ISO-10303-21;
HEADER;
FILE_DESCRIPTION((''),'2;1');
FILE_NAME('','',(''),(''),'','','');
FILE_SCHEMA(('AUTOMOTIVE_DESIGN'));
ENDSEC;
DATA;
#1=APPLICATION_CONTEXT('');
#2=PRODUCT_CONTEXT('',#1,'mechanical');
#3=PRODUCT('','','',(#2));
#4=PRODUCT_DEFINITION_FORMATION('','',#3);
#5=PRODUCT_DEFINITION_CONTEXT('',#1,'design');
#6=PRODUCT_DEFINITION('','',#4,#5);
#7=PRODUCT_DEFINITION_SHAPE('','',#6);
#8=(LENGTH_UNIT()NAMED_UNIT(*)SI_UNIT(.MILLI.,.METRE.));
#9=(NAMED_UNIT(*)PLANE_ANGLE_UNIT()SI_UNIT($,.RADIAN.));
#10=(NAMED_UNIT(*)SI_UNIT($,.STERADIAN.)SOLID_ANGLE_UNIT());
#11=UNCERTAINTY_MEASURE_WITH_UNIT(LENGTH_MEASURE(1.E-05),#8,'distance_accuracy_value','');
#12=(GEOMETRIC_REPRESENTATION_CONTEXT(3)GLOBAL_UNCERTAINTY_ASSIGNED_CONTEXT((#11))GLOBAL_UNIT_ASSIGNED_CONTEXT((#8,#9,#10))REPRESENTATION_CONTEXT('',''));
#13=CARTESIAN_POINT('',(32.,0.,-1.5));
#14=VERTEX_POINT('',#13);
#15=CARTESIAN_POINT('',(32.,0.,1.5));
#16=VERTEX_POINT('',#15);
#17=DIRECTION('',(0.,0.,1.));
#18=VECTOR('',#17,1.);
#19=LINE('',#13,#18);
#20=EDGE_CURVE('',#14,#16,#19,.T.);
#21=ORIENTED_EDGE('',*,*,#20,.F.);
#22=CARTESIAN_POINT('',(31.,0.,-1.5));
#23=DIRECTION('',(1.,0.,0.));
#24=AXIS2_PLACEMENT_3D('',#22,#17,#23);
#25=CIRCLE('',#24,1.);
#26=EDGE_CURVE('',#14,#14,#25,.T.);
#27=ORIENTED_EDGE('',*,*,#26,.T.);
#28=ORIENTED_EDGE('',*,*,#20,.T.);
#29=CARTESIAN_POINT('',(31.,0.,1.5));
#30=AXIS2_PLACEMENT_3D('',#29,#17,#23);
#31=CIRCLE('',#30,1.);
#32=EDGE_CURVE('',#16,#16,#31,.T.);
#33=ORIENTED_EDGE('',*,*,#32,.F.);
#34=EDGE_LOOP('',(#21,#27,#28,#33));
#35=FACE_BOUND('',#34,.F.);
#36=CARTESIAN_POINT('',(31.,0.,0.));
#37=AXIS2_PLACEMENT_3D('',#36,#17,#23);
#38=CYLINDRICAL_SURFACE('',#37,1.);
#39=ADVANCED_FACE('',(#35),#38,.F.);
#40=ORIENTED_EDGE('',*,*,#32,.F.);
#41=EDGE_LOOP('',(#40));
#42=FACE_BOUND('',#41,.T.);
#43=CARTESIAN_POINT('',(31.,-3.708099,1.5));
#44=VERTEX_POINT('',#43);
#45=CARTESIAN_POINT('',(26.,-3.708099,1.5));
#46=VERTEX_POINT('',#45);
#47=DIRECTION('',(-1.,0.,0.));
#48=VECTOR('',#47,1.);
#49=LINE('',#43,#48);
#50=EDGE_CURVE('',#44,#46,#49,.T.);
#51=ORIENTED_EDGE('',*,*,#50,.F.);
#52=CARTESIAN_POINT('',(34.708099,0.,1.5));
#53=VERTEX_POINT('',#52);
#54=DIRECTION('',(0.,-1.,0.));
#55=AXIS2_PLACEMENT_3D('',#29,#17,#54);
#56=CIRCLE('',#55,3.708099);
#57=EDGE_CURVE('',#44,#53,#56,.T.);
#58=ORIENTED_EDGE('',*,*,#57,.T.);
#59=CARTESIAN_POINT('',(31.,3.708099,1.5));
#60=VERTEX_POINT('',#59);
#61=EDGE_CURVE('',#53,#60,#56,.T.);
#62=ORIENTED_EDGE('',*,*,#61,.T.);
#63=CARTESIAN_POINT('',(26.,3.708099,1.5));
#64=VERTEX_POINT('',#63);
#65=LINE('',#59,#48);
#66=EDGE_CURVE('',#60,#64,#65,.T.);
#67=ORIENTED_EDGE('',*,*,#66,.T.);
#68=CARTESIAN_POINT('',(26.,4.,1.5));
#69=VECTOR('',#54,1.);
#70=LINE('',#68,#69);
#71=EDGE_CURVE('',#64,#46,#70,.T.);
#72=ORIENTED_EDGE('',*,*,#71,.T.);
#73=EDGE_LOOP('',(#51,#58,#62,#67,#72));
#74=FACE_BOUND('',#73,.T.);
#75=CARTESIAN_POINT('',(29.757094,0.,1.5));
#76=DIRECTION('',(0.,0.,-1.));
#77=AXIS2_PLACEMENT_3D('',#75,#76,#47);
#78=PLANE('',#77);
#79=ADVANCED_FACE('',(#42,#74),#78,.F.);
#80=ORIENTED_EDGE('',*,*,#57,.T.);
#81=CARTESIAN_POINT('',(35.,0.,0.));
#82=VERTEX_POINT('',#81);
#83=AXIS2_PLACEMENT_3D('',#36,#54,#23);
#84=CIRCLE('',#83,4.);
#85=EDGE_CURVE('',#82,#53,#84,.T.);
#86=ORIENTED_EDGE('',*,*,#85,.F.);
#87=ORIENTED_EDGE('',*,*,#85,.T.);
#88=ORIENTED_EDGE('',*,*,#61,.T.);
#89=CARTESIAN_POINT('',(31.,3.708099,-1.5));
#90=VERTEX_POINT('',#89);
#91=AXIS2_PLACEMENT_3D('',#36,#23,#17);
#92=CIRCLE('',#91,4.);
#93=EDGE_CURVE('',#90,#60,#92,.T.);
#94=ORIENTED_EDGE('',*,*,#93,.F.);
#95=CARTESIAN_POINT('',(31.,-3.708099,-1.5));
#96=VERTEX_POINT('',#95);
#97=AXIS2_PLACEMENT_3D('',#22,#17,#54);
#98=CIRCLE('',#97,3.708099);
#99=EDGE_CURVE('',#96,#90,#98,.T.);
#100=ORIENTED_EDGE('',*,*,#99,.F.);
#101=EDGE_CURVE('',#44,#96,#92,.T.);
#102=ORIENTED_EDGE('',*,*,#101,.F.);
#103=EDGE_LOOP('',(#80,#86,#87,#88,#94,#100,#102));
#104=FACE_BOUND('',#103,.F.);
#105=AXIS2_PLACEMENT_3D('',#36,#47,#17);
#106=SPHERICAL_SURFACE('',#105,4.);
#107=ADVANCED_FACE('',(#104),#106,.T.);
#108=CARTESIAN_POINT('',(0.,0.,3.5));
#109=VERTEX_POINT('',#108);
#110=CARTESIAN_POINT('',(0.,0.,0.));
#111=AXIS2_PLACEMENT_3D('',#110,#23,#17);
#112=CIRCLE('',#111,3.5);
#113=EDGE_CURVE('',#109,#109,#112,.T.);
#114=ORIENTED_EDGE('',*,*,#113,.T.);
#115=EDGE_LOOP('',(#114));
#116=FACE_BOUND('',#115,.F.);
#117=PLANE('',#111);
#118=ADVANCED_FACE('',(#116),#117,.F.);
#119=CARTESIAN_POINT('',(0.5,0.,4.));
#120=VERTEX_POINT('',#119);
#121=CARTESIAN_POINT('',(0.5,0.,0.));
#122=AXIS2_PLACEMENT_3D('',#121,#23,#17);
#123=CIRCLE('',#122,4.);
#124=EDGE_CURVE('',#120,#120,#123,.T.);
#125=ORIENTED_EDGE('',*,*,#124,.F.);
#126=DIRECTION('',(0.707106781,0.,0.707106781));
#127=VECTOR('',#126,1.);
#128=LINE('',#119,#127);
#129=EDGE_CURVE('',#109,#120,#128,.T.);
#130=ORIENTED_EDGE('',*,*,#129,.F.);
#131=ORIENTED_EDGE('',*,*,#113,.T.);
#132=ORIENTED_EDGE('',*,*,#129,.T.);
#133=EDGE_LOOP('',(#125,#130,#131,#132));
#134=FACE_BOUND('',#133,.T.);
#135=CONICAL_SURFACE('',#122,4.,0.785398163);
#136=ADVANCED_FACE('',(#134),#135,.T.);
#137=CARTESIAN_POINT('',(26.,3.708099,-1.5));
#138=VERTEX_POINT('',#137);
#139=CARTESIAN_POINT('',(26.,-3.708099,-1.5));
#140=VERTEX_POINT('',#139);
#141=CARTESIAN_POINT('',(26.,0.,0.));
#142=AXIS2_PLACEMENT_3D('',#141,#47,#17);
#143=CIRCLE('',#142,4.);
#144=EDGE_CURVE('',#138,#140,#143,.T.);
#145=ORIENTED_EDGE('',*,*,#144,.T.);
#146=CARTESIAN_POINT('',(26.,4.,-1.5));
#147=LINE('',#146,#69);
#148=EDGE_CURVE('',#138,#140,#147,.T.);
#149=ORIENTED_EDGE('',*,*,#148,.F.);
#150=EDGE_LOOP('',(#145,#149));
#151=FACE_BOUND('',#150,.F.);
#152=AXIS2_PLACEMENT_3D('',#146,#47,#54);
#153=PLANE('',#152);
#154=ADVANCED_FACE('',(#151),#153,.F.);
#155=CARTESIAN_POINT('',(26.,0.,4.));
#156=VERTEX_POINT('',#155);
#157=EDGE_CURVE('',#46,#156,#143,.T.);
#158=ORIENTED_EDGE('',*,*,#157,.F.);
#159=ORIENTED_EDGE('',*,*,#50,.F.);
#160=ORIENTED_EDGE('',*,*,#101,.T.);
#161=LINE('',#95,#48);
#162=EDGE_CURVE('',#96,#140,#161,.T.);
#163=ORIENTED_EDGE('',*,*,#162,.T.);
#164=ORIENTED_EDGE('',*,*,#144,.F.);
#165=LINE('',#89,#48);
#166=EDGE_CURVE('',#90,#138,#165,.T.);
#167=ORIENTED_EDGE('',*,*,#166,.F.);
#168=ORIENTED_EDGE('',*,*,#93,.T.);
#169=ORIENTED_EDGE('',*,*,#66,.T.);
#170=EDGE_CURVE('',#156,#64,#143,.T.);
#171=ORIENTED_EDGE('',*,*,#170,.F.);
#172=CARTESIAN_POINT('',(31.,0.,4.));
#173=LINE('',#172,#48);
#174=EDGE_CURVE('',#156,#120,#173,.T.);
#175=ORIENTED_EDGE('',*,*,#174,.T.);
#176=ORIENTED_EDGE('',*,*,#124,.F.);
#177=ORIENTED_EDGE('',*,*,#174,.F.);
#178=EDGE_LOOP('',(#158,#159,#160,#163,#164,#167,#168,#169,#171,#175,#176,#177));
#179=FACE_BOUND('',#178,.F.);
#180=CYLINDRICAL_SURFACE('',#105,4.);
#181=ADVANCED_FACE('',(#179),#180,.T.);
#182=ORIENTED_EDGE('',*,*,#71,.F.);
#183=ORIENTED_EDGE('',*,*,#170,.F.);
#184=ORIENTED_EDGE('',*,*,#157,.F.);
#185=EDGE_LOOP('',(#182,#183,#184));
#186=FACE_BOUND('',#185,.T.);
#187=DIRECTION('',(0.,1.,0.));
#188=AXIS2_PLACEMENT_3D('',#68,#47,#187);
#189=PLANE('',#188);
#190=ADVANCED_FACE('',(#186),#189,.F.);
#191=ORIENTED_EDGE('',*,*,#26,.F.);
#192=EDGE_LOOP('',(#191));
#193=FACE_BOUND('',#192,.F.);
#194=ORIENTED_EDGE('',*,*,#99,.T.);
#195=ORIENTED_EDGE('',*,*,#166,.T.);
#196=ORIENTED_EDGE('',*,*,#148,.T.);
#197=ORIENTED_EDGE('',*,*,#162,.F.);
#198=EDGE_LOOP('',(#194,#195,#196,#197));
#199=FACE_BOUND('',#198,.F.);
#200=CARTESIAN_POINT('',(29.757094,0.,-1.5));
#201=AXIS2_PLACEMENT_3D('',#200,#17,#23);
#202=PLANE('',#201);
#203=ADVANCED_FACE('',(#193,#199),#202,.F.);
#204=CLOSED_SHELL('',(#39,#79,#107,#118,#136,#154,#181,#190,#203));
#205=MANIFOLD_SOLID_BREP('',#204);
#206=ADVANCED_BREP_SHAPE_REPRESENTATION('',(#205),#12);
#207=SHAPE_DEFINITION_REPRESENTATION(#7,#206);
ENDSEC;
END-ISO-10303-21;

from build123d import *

# Parameters (mm, degrees)
F2_SIZE  = 0.5
F4_START = -1.5
F4_DEPTH = 6.5
F5_R     = 1
F6_DEPTH = 1.5


# Not quite as in the source:
# - a pattern or mirror of a feature is missing from the dataset's text; its kind, count and spacing are read off the source's solid


with BuildPart() as f1:
    # F0 (on Front) → F1 (revolve)
    with BuildSketch(Plane.XZ):
        with BuildLine():
            Line((0, 4), (0, 0))
            Line((0, 0), (35, 0))
            ThreePointArc((35, 0), (33.8284271247, 2.8284271247), (31, 4))
            Line((31, 4), (0, 4))
        make_face()
    revolve(axis=Axis((22.9748431593, 0, 0), (1, 0, 0)))

    # F2
    f2_edges = [f1.edges().sort_by_distance(p)[0] for p in [
        (0, 0, -4),
    ]]
    chamfer(f2_edges, length=F2_SIZE)

    # F3 (on Top) → F4 (cut)
    with BuildSketch(Plane.XY.offset(F4_START)):
        with BuildLine():
            Line((26, -4), (31, -4))
            ThreePointArc((31, -4), (35, 0), (31, 4))
            Line((31, 4), (26, 4))
            Line((26, 4), (26, -4))
        make_face()
    f4 = extrude(amount=-F4_DEPTH, mode=Mode.SUBTRACT)

    # F4_copies: F4 across plane
    add(f4.mirror(Plane.XY), mode=Mode.SUBTRACT)

    # F5 (on Top) → F6 (cut, symmetric)
    with BuildSketch(Plane.XY):
        with Locations((31, 0)):
            Circle(F5_R)
    extrude(amount=F6_DEPTH, both=True, mode=Mode.SUBTRACT)


solid = f1.part
